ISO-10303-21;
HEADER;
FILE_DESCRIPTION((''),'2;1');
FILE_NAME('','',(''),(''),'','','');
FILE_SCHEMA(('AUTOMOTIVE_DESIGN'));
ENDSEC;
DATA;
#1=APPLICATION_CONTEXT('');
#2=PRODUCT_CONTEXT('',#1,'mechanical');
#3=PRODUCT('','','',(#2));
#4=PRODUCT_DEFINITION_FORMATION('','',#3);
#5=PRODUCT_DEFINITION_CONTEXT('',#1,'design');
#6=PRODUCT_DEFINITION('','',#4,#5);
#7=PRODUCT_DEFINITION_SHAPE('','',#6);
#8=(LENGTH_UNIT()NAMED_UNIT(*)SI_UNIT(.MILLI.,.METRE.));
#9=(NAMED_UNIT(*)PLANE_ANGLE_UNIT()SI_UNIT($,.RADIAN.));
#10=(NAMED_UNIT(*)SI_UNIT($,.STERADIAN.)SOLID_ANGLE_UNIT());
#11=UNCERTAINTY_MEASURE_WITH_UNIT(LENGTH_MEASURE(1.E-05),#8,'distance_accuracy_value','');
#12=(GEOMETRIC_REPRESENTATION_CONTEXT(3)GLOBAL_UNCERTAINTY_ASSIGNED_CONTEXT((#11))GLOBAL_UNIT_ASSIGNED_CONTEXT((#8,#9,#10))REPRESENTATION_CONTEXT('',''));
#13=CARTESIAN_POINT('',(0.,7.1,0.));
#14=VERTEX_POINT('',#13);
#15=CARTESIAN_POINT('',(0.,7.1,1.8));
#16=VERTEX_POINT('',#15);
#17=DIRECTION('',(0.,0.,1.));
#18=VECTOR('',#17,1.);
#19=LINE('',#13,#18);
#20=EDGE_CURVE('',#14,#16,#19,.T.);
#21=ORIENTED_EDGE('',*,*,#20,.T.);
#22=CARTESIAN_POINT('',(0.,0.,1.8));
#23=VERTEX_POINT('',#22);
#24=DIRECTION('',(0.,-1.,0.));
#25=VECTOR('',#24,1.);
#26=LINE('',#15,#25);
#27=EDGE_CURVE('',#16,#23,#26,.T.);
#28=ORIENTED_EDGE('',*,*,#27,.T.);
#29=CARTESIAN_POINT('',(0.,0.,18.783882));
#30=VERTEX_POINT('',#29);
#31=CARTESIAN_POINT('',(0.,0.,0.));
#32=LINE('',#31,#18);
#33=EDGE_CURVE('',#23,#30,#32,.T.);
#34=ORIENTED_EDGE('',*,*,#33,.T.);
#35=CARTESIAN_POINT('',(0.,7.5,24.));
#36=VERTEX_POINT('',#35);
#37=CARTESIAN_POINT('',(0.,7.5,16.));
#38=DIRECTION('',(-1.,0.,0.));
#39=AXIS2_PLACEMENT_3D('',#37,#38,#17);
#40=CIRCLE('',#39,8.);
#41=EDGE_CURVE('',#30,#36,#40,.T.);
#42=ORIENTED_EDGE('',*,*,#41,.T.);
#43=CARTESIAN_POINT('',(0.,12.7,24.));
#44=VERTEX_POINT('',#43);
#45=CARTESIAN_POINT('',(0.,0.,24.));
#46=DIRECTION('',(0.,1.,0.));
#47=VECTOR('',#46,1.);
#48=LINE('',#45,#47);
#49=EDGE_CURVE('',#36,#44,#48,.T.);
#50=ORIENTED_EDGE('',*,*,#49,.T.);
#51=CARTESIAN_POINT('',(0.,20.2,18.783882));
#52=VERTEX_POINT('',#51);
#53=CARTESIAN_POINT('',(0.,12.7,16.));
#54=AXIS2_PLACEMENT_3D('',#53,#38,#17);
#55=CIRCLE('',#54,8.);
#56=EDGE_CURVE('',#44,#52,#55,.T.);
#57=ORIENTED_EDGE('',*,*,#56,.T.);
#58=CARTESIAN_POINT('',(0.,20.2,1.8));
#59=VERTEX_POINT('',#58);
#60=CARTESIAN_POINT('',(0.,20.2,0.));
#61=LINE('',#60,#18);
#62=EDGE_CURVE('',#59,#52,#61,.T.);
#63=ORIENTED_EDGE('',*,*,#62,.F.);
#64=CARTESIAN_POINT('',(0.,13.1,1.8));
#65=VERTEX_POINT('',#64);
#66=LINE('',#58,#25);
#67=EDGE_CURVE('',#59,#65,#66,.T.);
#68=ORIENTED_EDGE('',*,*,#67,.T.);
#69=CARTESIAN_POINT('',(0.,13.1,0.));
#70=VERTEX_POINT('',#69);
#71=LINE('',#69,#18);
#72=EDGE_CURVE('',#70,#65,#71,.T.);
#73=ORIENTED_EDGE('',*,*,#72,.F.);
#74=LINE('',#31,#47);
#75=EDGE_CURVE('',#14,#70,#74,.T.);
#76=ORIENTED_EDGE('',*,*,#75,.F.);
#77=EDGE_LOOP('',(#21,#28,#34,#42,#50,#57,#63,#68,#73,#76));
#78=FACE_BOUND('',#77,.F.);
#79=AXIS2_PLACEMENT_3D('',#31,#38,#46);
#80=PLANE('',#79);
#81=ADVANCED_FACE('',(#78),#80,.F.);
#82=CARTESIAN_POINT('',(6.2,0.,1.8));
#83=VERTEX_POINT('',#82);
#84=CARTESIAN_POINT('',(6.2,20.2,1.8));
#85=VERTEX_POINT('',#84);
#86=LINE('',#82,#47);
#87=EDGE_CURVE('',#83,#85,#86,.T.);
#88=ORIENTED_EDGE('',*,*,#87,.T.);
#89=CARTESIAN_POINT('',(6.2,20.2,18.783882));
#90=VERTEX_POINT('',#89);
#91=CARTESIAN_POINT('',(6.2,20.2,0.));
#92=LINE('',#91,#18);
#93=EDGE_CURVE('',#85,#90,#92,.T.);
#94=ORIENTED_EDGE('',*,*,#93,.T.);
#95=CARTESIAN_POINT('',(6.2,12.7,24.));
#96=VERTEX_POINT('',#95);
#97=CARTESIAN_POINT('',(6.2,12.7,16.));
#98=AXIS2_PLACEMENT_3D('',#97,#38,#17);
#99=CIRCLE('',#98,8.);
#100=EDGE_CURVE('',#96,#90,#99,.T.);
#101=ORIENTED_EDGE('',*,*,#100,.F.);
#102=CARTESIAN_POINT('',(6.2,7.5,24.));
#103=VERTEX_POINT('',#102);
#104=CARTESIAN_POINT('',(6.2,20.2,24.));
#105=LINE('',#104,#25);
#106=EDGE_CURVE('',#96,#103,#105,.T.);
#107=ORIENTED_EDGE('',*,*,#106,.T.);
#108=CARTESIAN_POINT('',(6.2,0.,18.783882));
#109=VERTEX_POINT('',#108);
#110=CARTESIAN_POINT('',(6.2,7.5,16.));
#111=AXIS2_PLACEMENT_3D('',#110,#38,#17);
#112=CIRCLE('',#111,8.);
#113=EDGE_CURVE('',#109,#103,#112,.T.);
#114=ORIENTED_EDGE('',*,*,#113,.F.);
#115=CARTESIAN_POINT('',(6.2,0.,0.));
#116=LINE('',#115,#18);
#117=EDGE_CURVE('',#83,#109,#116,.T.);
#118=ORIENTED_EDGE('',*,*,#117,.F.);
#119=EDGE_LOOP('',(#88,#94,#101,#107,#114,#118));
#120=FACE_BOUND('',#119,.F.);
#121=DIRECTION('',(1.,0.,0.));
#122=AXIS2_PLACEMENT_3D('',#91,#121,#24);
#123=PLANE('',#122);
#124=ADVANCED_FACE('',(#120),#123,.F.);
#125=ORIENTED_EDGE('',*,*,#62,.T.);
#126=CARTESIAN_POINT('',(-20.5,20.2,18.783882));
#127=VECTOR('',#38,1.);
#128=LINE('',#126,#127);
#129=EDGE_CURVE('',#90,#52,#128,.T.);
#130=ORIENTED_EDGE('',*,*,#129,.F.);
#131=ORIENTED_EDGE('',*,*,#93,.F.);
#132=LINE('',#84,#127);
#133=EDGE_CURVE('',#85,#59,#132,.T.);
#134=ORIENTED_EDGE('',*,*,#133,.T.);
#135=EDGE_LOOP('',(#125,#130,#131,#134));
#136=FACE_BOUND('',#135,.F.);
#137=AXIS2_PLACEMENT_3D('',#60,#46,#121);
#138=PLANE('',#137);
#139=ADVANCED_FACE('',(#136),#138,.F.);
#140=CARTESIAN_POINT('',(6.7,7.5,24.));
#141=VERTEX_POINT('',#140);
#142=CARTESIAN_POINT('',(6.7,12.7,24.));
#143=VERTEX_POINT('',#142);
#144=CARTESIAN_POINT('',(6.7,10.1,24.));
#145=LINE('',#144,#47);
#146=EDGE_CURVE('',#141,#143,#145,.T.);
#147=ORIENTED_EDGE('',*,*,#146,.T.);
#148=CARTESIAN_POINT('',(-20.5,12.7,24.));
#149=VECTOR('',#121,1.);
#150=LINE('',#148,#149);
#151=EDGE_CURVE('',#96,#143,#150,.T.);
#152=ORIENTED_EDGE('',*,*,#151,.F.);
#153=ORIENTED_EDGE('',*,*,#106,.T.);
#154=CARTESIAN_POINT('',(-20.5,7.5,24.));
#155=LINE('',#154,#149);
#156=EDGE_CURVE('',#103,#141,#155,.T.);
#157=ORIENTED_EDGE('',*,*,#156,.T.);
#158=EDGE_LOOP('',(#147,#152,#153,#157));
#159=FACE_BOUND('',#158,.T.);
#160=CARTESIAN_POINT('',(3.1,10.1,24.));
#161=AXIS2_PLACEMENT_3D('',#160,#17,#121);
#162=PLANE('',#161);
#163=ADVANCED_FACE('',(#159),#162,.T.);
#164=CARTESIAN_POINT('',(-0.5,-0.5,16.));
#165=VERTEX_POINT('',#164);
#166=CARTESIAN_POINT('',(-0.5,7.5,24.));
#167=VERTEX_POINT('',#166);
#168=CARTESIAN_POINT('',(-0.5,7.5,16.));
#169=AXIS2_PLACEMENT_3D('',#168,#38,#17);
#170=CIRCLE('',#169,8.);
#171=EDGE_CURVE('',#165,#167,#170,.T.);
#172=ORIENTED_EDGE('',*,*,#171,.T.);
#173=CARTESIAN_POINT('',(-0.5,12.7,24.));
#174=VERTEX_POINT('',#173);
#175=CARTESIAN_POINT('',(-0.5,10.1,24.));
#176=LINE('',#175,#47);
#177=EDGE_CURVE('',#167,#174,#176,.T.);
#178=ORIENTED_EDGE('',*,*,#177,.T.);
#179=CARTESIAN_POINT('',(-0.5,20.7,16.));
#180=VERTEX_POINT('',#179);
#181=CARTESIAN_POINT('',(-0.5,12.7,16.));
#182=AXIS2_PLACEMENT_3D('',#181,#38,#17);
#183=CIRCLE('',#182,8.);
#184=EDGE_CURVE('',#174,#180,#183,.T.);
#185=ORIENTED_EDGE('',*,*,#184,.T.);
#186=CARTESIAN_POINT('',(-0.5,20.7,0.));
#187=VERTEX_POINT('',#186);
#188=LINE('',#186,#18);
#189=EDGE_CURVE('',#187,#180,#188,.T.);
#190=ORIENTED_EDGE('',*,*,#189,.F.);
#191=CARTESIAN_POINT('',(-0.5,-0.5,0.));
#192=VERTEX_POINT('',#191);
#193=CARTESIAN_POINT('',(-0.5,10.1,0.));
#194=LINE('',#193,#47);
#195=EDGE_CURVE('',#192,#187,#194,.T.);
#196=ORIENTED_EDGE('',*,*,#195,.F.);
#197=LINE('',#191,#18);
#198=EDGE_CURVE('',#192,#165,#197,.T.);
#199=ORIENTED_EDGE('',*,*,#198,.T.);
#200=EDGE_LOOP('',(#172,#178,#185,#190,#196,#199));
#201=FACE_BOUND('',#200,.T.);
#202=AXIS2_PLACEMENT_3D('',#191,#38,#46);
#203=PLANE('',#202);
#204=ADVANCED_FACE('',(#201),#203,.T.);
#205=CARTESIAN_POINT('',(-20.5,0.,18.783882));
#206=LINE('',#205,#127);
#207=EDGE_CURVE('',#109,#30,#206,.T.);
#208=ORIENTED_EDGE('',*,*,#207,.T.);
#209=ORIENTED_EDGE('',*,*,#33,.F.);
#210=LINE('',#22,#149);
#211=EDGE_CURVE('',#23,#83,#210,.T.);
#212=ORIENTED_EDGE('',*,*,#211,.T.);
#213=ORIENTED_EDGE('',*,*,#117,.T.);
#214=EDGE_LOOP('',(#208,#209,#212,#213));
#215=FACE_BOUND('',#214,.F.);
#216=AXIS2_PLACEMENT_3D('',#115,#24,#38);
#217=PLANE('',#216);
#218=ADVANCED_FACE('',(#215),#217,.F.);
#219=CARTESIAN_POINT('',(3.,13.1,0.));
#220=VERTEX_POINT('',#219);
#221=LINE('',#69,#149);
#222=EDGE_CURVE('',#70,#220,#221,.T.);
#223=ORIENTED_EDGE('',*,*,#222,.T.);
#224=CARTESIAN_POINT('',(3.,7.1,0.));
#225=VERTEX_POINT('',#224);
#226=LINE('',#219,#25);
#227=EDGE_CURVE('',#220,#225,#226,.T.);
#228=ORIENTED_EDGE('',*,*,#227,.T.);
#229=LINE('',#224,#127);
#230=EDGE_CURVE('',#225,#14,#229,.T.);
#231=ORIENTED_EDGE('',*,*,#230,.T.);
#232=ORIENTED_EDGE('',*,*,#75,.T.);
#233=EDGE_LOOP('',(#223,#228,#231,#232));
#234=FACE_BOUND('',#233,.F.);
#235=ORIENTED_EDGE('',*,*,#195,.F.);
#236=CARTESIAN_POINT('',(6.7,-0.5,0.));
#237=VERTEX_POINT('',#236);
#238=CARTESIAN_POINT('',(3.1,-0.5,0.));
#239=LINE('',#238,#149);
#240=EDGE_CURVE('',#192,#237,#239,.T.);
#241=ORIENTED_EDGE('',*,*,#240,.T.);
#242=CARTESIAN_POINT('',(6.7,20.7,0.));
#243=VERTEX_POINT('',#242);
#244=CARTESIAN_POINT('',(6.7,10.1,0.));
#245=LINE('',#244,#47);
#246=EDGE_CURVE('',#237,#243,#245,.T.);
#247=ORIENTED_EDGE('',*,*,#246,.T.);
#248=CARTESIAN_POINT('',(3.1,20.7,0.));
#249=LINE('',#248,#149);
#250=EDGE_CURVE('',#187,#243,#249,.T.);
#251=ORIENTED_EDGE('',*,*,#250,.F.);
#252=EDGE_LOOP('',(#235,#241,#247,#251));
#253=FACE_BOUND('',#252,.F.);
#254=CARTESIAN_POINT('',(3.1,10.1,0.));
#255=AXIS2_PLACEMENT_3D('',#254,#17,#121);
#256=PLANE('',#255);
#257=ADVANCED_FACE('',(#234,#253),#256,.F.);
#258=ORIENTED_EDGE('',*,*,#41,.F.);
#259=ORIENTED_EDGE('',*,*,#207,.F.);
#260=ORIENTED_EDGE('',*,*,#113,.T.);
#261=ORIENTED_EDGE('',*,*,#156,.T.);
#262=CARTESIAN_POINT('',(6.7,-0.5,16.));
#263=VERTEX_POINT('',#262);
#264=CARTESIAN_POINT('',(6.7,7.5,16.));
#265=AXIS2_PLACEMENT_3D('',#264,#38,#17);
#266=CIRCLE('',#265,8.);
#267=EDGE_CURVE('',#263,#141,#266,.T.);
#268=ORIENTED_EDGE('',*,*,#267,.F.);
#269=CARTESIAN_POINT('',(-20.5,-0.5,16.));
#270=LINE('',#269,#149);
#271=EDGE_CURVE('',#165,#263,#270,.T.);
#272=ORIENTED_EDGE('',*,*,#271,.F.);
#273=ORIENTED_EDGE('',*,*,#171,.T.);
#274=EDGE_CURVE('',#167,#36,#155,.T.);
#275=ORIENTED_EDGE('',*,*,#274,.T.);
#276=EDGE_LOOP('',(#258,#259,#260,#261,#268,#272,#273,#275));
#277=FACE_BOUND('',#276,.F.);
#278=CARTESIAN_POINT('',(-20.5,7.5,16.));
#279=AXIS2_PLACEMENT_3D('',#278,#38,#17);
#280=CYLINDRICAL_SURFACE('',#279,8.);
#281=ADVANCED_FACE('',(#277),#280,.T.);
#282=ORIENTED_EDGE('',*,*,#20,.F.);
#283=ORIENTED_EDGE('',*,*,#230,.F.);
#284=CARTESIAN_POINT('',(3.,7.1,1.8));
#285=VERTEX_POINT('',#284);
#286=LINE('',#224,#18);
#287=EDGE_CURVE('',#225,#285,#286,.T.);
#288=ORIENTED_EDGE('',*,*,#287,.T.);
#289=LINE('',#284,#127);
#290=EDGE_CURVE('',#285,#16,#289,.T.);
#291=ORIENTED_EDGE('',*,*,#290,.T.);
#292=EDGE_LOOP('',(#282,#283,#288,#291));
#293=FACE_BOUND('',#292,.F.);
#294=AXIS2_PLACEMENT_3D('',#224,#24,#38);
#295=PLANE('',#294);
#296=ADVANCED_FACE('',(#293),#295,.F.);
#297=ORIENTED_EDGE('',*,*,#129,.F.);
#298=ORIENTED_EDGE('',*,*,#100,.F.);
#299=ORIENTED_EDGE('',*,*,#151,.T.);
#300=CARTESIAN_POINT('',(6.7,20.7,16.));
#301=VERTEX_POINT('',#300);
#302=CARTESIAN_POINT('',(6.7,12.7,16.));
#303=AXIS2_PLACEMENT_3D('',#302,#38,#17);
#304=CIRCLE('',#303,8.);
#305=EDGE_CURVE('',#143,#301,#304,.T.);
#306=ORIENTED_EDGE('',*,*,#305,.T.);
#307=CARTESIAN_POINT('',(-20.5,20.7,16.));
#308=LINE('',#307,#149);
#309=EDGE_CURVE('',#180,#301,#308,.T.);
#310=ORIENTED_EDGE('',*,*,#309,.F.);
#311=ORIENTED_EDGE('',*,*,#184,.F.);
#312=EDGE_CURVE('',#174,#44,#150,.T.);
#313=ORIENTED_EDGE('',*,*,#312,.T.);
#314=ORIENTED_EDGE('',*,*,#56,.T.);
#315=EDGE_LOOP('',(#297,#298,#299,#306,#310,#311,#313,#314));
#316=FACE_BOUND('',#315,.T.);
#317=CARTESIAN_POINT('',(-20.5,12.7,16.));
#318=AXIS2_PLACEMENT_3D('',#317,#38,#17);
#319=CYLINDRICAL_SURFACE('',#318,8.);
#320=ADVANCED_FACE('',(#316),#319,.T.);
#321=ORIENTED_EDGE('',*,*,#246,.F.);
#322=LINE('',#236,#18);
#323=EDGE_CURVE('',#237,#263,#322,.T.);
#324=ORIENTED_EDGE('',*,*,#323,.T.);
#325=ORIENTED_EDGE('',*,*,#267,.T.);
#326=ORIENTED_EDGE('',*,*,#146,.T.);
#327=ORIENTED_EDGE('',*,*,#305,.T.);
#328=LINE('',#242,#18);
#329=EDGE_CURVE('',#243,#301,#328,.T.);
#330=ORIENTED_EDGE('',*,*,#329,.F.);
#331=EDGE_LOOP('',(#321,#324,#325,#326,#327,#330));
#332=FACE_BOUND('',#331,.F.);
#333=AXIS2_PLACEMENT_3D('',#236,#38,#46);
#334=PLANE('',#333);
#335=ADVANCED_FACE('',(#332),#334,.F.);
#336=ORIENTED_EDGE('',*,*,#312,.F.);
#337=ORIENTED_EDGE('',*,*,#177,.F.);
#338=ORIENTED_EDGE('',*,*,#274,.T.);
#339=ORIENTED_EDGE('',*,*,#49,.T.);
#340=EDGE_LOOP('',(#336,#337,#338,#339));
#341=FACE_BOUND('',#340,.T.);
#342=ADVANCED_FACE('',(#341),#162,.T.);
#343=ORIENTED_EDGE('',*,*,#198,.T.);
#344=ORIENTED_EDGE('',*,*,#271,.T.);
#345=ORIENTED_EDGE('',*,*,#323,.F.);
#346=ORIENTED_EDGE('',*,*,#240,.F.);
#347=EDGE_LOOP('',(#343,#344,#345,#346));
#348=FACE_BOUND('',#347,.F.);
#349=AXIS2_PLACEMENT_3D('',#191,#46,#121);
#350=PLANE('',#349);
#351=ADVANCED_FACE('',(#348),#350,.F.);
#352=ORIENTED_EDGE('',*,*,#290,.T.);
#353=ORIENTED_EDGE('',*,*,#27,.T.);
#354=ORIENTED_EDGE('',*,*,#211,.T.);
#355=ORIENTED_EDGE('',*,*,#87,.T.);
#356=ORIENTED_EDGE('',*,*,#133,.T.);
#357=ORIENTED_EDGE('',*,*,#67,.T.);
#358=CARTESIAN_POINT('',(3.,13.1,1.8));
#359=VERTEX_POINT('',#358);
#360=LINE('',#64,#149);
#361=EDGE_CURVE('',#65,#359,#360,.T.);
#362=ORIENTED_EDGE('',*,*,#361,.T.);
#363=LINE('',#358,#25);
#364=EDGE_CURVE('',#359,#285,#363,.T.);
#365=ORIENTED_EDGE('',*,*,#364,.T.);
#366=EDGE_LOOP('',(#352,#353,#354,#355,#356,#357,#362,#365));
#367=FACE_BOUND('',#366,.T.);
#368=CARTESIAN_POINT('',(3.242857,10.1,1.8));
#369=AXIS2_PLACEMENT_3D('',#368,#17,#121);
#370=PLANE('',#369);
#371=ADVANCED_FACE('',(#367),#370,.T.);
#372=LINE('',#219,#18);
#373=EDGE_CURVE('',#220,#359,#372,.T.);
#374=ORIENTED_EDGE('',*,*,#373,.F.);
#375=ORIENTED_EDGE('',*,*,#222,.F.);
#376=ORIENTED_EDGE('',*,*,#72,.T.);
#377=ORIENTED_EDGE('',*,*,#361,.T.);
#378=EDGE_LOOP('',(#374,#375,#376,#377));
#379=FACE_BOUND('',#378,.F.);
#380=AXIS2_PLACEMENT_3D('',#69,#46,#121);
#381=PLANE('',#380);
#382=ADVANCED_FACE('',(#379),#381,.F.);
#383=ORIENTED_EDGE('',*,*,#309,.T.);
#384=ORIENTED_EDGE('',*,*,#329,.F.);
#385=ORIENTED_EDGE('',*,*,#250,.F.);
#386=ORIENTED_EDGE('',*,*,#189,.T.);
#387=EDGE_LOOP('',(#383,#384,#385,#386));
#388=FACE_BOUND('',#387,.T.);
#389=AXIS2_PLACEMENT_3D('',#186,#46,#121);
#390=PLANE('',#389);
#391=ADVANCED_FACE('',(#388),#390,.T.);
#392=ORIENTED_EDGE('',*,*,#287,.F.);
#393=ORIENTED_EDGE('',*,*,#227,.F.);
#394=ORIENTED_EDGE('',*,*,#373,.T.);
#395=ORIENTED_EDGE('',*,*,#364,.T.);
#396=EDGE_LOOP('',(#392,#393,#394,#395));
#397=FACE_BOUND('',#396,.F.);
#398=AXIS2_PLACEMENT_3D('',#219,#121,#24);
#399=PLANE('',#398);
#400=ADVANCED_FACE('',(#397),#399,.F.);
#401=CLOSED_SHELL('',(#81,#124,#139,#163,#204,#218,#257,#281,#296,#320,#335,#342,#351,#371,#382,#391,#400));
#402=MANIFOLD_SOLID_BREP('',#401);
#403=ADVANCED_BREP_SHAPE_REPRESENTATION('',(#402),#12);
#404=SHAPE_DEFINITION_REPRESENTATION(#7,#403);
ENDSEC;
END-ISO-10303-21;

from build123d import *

# Parameters (mm, degrees)
F1_DEPTH    = 1.8
F0_W        = 7.2
F0_H        = 21.2
F2_DEPTH    = 24
F3_T1_DEPTH = 47.2


# Not quite as in the source:
# - a fillet or chamfer that OpenCascade refuses, or shapes differently, is made with other operations: its cross-section is extruded or revolved along the edge and cut away or added


with BuildPart() as f1:
    # F0 (on Top) → F1 (new body)
    with BuildSketch(Plane.XY):
        Polygon((0, 7.1), (0, 0), (6.2, 0), (6.2, 20.2), (0, 20.2), (0, 13.1), (3, 13.1), (3, 10.1), (3, 7.1), align=None)
    extrude(amount=F1_DEPTH)

    # F0 (on Top) → F2 (join)
    with BuildSketch(Plane.XY):
        with Locations((3.1, 10.1)):
            Rectangle(F0_W, F0_H)
        Polygon((6.2, 0), (0, 0), (0, 7.1), (0, 10.1), (0, 13.1), (0, 20.2), (6.2, 20.2), align=None, mode=Mode.SUBTRACT)
    extrude(amount=F2_DEPTH)

    # F3: fillet of radius 8 on 2 edges, made by hand

    # F3_s2 → F3_t1 (cut)
    with BuildSketch(Plane.YZ.offset(-20.5)):
        with BuildLine():
            ThreePointArc((7.5, 24), (1.8431457505, 21.6568542495), (-0.5, 16))
            Line((-0.5, 16), (-0.5, 24))
            Line((-0.5, 24), (7.5, 24))
        make_face()
        with BuildLine():
            ThreePointArc((12.7, 24), (18.3568542495, 21.6568542495), (20.7, 16))
            Line((20.7, 16), (20.7, 24))
            Line((20.7, 24), (12.7, 24))
        make_face()
    extrude(amount=F3_T1_DEPTH, mode=Mode.SUBTRACT)


solid = f1.part
